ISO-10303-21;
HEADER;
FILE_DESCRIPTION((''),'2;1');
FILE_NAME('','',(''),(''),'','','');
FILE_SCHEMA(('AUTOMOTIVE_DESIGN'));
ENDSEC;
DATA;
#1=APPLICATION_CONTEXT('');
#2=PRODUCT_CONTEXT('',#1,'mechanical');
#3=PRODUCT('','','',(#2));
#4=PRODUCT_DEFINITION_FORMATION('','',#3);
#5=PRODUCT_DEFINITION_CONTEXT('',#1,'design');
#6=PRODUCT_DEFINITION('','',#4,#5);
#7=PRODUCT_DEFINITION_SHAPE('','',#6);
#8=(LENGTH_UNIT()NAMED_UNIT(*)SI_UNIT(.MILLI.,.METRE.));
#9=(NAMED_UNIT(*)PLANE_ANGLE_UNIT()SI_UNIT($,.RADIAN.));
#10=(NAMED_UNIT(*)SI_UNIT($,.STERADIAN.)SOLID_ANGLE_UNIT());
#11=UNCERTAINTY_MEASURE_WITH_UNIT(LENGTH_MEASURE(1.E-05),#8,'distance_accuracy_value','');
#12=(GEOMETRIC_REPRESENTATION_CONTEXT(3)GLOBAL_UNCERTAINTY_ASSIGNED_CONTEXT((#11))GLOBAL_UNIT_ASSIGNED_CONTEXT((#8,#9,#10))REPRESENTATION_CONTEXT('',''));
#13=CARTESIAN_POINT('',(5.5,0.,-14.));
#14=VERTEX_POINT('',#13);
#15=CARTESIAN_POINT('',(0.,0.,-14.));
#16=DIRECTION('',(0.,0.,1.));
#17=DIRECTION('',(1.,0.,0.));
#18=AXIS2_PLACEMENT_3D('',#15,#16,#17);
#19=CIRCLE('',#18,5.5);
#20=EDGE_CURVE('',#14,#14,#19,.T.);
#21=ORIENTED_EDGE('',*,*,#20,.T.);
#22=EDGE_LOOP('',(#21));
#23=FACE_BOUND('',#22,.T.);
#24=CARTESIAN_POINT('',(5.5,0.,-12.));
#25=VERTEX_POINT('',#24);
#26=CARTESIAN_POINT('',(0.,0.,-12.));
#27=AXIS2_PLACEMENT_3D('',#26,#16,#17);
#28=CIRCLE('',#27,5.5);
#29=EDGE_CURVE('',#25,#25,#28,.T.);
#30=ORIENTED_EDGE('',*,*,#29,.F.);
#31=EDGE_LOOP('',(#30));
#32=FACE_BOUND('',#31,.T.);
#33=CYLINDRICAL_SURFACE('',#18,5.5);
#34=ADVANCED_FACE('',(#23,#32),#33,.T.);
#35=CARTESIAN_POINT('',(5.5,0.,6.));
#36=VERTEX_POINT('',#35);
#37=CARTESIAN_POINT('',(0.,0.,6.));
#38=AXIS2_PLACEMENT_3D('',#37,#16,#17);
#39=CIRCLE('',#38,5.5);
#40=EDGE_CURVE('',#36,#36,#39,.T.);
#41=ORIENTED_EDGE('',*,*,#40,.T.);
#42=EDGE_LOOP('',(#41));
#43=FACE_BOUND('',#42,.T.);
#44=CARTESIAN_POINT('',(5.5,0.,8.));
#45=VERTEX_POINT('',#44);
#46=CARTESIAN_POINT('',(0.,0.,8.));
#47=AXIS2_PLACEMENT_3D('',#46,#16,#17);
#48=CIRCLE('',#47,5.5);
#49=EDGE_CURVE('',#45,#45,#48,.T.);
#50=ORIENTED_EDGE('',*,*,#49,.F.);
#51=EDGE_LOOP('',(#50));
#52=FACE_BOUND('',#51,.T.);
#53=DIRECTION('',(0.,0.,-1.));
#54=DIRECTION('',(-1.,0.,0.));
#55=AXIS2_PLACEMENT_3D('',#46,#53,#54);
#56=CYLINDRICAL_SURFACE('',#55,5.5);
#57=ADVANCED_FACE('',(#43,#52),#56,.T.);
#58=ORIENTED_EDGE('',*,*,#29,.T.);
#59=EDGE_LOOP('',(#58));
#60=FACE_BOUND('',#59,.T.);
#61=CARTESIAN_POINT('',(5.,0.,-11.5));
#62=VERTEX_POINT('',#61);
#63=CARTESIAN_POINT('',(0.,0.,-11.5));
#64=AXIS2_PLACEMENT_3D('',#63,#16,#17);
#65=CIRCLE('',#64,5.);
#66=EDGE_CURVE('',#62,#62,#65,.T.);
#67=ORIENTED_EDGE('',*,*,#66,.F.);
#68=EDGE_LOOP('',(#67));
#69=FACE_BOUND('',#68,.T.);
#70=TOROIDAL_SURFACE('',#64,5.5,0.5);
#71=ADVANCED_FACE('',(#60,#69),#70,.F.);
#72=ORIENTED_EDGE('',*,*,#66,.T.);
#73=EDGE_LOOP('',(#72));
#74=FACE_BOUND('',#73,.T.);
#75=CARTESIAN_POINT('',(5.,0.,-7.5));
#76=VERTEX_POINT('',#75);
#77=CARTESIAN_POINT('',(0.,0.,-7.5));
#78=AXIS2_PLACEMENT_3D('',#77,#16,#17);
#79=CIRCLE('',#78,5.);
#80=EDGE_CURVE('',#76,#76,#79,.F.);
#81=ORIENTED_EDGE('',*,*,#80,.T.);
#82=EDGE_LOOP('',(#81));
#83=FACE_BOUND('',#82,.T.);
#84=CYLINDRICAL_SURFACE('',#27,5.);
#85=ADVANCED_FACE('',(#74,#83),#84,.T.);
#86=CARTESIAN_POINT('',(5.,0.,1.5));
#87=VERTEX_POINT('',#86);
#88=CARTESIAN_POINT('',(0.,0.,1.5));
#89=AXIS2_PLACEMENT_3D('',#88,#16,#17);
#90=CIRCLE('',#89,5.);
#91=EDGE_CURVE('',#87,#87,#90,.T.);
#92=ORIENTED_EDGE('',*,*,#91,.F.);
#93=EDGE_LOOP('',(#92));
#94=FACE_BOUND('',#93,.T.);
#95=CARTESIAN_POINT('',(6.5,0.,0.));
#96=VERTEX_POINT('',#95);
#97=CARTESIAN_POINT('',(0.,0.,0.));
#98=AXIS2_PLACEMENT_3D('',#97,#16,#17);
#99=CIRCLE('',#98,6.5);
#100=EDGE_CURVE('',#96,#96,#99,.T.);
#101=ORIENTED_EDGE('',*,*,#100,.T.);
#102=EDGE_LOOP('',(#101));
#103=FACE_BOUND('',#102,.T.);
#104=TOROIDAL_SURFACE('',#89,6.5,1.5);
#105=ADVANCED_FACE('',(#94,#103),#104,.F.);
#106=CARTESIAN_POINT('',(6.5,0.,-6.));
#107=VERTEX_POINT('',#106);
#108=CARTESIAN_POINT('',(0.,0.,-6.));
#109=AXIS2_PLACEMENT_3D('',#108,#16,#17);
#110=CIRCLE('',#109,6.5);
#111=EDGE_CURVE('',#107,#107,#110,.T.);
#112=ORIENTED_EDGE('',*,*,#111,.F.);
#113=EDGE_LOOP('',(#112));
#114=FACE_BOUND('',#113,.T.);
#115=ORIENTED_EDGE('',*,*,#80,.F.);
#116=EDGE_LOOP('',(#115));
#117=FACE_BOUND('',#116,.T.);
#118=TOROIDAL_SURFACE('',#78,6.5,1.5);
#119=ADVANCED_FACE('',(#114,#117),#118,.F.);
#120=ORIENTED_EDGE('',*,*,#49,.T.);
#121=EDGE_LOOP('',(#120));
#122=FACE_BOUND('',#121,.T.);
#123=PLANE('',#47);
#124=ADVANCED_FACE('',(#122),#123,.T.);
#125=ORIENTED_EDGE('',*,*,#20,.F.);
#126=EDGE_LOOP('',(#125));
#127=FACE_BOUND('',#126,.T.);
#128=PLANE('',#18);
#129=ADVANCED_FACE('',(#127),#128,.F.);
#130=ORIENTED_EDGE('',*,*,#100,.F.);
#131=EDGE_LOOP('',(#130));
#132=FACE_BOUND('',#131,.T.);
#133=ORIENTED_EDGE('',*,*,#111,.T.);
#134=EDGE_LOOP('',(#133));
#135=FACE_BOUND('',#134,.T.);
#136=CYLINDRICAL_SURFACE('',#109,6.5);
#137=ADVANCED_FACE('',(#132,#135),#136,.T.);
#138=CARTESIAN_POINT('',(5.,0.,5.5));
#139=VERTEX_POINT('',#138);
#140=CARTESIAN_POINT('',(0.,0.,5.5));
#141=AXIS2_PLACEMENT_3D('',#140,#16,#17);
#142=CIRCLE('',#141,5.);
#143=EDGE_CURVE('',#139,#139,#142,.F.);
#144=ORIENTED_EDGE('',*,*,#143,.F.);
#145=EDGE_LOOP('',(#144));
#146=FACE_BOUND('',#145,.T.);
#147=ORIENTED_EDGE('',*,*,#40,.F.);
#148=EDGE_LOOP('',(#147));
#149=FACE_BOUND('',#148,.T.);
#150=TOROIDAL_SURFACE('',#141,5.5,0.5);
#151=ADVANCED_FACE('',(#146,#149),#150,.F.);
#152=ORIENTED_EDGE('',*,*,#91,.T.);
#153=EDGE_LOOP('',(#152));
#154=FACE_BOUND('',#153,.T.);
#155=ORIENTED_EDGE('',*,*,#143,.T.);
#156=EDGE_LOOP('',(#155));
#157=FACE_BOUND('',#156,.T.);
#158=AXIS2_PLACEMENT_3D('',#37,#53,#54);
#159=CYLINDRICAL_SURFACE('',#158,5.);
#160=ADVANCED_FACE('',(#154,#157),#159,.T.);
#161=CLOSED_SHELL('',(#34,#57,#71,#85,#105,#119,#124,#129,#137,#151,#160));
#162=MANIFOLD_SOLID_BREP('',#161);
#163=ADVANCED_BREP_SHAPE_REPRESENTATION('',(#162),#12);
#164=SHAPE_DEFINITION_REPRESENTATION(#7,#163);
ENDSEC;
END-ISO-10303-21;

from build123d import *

# Parameters (mm, degrees)
SKETCH1_R           = 5
BOSS_EXTRUDE1_DEPTH = 6
BOSS_EXTRUDE2_START = -6
SKETCH1_3_R         = 6.5
SKETCH1_3_R_2       = 5
BOSS_EXTRUDE2_DEPTH = 6
BOSS_EXTRUDE3_START = -12
SKETCH1_4_R         = 5
BOSS_EXTRUDE3_DEPTH = 12
FILLET1_R           = 1.5
SKETCH3_R           = 5.5
BOSS_EXTRUDE4_DEPTH = 2
BOSS_EXTRUDE5_START = -20
SKETCH3_2_R         = 5.5
BOSS_EXTRUDE5_DEPTH = 2
FILLET2_R           = 0.5


with BuildPart() as part:
    # Sketch1 → Boss-Extrude1 (new body)
    with BuildSketch(Plane.XY):
        Circle(SKETCH1_R)
    extrude(amount=BOSS_EXTRUDE1_DEPTH)

    # Sketch1<3> → Boss-Extrude2 (add)
    # profile 1 of 2: a face of its own
    with BuildSketch(Plane.XY.offset(BOSS_EXTRUDE2_START)):
        Circle(SKETCH1_3_R)
        Circle(SKETCH1_3_R_2, mode=Mode.SUBTRACT)
    # profile 2 of 2: a face of its own
    with BuildSketch(Plane.XY.offset(BOSS_EXTRUDE2_START)):
        Circle(SKETCH1_3_R_2)
    extrude(amount=BOSS_EXTRUDE2_DEPTH)

    # Sketch1<4> → Boss-Extrude3 (add)
    with BuildSketch(Plane.XY.offset(BOSS_EXTRUDE3_START)):
        Circle(SKETCH1_4_R)
    extrude(amount=BOSS_EXTRUDE3_DEPTH)

    # Fillet1
    fillet1_edges = [part.edges().sort_by_distance(p)[0] for p in [
        (-5, 0, -6),
        (-5, 0, 0),
    ]]
    fillet(fillet1_edges, radius=FILLET1_R - 0.0001)  # a hair under: the kernel refuses the full size

    # Sketch3 → Boss-Extrude4 (add)
    with BuildSketch(Plane.XY.offset(6)):
        Circle(SKETCH3_R)
    extrude(amount=BOSS_EXTRUDE4_DEPTH)

    # Sketch3<2> → Boss-Extrude5 (add)
    with BuildSketch(Plane.XY.offset(6).offset(BOSS_EXTRUDE5_START)):
        Circle(SKETCH3_2_R)
    extrude(amount=BOSS_EXTRUDE5_DEPTH)

    # Fillet2
    fillet2_edges = [part.edges().sort_by_distance(p)[0] for p in [
        (-5, 0, -12),
        (-5, 0, 6),
    ]]
    fillet(fillet2_edges, radius=FILLET2_R - 0.0001)  # a hair under: the kernel refuses the full size


solid = part.part
